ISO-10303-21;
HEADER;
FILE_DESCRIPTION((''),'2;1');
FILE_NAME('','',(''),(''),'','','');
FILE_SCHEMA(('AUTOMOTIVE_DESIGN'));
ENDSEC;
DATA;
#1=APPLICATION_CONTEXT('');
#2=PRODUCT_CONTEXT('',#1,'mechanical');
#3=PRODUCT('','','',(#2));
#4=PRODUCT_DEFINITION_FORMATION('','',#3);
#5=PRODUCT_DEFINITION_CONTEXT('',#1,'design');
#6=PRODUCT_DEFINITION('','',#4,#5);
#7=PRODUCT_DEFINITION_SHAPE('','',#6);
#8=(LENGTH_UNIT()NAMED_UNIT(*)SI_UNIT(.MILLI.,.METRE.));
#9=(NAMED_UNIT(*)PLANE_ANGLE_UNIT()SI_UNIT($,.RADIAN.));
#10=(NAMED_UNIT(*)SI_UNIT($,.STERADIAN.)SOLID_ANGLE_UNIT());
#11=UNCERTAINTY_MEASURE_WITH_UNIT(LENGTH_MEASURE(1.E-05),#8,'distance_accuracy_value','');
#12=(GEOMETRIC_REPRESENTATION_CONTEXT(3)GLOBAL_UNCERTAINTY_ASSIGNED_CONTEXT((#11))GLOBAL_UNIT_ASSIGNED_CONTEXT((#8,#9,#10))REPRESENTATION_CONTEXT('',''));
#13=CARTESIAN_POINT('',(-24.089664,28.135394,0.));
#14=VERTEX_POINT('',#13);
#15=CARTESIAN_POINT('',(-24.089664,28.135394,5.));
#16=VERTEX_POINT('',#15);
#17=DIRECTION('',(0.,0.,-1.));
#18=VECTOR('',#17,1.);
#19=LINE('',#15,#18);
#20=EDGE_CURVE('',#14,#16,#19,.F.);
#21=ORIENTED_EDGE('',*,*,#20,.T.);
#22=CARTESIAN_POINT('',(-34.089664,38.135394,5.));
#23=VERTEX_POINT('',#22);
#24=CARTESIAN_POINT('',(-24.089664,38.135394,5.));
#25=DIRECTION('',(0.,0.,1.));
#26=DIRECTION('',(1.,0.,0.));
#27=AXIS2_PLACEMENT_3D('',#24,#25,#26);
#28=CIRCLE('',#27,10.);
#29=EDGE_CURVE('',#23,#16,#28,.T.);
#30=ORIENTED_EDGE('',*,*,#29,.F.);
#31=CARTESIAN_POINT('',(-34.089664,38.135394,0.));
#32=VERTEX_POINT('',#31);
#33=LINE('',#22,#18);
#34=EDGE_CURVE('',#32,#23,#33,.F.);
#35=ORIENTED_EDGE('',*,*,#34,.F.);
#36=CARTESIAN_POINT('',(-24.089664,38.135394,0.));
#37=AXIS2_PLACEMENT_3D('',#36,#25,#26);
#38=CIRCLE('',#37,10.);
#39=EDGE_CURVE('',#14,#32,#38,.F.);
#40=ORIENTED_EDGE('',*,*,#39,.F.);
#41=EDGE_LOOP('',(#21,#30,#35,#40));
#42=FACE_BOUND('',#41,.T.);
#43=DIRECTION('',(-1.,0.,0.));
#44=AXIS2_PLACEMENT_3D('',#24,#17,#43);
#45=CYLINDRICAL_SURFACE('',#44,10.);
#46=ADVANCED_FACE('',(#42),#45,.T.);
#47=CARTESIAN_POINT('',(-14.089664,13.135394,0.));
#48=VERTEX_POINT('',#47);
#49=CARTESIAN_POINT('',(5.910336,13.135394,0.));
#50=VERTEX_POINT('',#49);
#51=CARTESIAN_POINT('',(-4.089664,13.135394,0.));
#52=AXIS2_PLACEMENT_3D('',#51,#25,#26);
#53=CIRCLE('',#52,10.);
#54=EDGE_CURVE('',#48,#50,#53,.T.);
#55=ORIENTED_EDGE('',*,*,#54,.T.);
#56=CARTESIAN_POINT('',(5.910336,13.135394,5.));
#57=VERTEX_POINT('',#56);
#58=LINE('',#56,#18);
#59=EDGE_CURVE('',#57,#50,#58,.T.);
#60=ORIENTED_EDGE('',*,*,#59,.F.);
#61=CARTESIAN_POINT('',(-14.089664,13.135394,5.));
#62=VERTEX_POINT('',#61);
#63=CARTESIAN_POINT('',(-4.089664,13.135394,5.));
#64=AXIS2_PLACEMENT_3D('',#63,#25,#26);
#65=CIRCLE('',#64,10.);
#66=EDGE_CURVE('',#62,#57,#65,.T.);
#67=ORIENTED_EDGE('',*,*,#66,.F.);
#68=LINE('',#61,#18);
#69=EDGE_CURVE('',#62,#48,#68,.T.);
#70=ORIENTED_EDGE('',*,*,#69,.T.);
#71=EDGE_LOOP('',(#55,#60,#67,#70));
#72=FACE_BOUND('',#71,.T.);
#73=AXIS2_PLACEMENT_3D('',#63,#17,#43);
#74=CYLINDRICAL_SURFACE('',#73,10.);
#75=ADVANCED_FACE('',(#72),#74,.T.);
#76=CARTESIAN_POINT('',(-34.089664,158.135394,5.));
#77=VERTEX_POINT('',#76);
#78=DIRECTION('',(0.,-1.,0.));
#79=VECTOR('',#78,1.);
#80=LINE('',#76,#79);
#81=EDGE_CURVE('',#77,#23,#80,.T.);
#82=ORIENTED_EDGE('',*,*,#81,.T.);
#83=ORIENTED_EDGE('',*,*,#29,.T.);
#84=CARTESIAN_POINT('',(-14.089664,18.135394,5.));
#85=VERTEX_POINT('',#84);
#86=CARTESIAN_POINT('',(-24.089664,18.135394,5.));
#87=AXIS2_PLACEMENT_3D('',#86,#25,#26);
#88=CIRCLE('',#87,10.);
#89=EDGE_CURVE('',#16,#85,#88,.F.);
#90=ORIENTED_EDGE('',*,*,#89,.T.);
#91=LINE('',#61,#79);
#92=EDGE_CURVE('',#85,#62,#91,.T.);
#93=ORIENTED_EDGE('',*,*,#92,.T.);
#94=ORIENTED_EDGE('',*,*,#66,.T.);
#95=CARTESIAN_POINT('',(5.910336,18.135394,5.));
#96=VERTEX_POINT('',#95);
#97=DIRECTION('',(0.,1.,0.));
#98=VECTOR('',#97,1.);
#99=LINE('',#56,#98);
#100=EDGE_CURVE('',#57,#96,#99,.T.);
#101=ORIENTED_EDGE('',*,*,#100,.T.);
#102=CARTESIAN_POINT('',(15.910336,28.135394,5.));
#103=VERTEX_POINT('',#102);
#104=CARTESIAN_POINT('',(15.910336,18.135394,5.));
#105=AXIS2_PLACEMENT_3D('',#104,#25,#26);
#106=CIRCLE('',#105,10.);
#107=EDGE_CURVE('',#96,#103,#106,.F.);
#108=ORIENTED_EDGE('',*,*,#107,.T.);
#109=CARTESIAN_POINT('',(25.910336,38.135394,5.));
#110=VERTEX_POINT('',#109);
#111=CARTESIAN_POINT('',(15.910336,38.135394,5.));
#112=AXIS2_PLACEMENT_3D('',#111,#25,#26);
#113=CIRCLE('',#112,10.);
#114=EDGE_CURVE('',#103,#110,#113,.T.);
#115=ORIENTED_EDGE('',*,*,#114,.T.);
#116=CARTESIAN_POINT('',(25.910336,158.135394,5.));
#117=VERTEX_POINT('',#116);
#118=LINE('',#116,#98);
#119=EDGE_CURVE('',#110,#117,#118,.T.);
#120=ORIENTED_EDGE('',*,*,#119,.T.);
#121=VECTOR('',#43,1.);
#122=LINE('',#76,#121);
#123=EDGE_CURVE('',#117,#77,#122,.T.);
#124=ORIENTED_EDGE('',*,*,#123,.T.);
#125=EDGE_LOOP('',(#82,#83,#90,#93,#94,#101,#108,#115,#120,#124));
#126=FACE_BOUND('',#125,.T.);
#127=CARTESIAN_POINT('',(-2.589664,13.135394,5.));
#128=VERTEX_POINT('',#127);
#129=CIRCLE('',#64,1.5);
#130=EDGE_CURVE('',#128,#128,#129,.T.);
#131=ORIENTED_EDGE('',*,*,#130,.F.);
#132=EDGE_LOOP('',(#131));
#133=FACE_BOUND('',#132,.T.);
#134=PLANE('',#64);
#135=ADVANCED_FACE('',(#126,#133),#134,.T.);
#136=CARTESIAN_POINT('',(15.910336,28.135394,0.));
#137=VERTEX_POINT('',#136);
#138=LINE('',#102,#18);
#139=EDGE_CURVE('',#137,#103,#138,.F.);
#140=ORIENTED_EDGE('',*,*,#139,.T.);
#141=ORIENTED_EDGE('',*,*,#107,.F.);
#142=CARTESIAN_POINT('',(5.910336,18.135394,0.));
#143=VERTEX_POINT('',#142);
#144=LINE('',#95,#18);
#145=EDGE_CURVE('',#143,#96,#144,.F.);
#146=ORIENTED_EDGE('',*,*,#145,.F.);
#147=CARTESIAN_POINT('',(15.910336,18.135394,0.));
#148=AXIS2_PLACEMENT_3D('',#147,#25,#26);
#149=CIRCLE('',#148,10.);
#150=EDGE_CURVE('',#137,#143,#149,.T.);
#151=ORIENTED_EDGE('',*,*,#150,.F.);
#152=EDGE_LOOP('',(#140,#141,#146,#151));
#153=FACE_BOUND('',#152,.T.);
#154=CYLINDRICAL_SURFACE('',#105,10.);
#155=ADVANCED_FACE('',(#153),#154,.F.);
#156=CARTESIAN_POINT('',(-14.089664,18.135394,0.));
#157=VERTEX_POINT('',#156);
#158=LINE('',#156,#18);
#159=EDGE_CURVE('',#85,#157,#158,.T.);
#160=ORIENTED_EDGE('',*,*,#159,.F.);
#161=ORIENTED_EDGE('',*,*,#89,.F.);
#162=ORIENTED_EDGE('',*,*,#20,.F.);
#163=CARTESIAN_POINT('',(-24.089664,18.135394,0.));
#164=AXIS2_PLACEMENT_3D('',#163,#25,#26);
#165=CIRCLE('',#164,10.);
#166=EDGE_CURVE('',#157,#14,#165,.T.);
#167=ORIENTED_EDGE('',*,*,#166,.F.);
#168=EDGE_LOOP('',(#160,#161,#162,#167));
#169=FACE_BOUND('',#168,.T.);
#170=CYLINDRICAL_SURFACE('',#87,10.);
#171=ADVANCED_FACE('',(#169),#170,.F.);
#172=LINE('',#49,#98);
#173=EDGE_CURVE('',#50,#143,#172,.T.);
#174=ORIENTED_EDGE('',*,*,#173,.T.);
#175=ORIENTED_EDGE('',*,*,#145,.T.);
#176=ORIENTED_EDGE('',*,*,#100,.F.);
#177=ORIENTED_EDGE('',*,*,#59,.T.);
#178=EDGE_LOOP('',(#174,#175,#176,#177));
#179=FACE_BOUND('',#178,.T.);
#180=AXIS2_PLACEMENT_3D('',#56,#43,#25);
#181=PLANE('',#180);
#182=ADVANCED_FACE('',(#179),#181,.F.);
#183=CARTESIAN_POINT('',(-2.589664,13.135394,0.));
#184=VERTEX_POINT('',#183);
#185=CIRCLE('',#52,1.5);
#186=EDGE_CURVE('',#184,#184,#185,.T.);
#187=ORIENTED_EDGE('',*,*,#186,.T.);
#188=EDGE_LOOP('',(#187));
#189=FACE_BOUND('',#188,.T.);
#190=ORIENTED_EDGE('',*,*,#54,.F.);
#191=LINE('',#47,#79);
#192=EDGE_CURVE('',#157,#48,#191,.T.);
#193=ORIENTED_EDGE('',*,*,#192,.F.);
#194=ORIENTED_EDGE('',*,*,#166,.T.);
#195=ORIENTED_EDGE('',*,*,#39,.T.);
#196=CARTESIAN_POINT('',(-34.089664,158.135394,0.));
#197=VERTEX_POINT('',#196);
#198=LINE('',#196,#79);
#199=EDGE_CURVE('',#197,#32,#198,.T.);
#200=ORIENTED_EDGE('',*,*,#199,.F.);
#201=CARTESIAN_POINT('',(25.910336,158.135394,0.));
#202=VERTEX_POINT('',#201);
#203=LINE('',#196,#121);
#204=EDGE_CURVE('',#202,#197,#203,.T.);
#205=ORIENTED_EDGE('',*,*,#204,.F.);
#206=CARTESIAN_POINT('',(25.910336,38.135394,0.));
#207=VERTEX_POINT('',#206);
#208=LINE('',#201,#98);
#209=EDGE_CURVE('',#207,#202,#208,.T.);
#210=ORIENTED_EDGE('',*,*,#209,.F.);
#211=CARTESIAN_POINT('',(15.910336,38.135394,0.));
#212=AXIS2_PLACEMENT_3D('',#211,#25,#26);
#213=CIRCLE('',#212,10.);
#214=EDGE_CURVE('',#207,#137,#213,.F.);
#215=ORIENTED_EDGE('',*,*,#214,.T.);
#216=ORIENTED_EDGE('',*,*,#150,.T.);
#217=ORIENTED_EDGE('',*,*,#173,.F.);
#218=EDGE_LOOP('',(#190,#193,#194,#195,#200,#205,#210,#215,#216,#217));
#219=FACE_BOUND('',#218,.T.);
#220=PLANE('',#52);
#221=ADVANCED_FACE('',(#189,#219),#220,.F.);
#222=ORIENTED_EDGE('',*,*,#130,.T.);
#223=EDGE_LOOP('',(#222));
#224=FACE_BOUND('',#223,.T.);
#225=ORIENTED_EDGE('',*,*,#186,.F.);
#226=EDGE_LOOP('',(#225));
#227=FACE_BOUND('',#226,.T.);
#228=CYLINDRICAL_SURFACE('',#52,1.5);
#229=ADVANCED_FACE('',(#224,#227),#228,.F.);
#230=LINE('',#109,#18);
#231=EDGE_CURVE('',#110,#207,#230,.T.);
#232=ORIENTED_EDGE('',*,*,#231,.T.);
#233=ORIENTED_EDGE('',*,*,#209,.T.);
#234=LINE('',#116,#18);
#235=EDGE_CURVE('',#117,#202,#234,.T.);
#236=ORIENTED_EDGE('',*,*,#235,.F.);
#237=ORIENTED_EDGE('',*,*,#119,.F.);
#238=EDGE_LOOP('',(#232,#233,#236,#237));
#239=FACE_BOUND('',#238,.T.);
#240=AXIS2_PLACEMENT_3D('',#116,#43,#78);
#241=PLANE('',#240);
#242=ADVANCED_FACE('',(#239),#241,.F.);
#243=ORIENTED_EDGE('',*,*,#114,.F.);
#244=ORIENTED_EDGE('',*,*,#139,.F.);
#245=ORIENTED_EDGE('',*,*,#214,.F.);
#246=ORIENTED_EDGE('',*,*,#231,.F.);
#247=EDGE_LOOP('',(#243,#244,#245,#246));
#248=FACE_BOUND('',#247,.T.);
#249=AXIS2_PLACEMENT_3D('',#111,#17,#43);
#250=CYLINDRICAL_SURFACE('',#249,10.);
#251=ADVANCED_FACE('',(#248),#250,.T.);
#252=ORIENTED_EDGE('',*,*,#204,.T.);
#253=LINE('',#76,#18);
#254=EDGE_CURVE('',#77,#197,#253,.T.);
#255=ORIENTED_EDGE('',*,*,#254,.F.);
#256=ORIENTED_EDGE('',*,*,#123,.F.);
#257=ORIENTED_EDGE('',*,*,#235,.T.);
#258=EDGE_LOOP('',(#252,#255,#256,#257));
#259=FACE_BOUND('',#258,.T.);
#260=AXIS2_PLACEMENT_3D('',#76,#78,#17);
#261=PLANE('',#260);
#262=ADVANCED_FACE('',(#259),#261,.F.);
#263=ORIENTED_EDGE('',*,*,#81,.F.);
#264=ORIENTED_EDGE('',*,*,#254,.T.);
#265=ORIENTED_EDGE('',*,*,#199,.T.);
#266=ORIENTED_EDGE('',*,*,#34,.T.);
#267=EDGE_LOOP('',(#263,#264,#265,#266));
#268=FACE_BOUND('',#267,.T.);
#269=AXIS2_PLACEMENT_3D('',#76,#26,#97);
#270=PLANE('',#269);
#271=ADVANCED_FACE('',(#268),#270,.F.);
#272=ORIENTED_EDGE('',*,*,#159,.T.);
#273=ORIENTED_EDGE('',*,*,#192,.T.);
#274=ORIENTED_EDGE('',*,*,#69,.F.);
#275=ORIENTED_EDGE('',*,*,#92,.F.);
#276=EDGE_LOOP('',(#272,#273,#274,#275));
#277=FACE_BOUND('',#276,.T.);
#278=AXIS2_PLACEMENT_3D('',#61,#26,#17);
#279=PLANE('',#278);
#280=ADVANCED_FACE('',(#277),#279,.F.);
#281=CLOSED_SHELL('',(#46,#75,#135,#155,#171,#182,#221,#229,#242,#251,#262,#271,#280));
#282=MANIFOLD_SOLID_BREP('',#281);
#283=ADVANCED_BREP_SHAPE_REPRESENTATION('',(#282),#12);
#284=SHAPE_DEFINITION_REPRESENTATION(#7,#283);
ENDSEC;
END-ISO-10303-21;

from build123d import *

# Parameters (mm, degrees)
RESSALTO_EXTRUS_O1_DEPTH = 5
ESBO_O2_R                = 1.5
CORTE_EXTRUS_O1_DEPTH    = 5
FILETE1_R                = 10


with BuildPart() as part:
    # Esboço1 → Ressalto-extrusão1 (new body)
    with BuildSketch(Plane.XY):
        with BuildLine():
            Line((-14.089663978, 13.135393664), (-14.089663978, 28.135393664))
            Line((-14.089663978, 28.135393664), (-34.089663978, 28.135393664))
            Line((-34.089663978, 28.135393664), (-34.089663978, 158.135393664))
            Line((-34.089663978, 158.135393664), (25.910336022, 158.135393664))
            Line((25.910336022, 158.135393664), (25.910336022, 28.135393664))
            Line((25.910336022, 28.135393664), (5.910336022, 28.135393664))
            Line((5.910336022, 28.135393664), (5.910336022, 13.135393664))
            ThreePointArc((5.910336022, 13.135393664), (-4.089663978, 3.135393664), (-14.089663978, 13.135393664))
        make_face()
    extrude(amount=RESSALTO_EXTRUS_O1_DEPTH)

    # Esboço2 → Corte-extrusão1 (cut)
    with BuildSketch(Plane.XY.offset(5)):
        with Locations((-4.089663978, 13.135393664)):
            Circle(ESBO_O2_R)
    extrude(amount=-CORTE_EXTRUS_O1_DEPTH, mode=Mode.SUBTRACT)

    # Filete1
    filete1_edges = [part.edges().sort_by_distance(p)[0] for p in [
        (-14.089663978, 28.135393664, 2.5),
    ]]
    fillet(filete1_edges, radius=FILETE1_R)
    filete1_2_edges = [part.edges().sort_by_distance(p)[0] for p in [
        (-34.089663978, 28.135393664, 2.5),
    ]]
    fillet(filete1_2_edges, radius=FILETE1_R - 0.0001)  # a hair under: the kernel refuses the full size
    filete1_3_edges = [part.edges().sort_by_distance(p)[0] for p in [
        (5.910336022, 28.135393664, 2.5),
    ]]
    fillet(filete1_3_edges, radius=FILETE1_R)
    filete1_4_edges = [part.edges().sort_by_distance(p)[0] for p in [
        (25.910336022, 28.135393664, 2.5),
    ]]
    fillet(filete1_4_edges, radius=FILETE1_R - 0.0001)  # a hair under: the kernel refuses the full size


solid = part.part
